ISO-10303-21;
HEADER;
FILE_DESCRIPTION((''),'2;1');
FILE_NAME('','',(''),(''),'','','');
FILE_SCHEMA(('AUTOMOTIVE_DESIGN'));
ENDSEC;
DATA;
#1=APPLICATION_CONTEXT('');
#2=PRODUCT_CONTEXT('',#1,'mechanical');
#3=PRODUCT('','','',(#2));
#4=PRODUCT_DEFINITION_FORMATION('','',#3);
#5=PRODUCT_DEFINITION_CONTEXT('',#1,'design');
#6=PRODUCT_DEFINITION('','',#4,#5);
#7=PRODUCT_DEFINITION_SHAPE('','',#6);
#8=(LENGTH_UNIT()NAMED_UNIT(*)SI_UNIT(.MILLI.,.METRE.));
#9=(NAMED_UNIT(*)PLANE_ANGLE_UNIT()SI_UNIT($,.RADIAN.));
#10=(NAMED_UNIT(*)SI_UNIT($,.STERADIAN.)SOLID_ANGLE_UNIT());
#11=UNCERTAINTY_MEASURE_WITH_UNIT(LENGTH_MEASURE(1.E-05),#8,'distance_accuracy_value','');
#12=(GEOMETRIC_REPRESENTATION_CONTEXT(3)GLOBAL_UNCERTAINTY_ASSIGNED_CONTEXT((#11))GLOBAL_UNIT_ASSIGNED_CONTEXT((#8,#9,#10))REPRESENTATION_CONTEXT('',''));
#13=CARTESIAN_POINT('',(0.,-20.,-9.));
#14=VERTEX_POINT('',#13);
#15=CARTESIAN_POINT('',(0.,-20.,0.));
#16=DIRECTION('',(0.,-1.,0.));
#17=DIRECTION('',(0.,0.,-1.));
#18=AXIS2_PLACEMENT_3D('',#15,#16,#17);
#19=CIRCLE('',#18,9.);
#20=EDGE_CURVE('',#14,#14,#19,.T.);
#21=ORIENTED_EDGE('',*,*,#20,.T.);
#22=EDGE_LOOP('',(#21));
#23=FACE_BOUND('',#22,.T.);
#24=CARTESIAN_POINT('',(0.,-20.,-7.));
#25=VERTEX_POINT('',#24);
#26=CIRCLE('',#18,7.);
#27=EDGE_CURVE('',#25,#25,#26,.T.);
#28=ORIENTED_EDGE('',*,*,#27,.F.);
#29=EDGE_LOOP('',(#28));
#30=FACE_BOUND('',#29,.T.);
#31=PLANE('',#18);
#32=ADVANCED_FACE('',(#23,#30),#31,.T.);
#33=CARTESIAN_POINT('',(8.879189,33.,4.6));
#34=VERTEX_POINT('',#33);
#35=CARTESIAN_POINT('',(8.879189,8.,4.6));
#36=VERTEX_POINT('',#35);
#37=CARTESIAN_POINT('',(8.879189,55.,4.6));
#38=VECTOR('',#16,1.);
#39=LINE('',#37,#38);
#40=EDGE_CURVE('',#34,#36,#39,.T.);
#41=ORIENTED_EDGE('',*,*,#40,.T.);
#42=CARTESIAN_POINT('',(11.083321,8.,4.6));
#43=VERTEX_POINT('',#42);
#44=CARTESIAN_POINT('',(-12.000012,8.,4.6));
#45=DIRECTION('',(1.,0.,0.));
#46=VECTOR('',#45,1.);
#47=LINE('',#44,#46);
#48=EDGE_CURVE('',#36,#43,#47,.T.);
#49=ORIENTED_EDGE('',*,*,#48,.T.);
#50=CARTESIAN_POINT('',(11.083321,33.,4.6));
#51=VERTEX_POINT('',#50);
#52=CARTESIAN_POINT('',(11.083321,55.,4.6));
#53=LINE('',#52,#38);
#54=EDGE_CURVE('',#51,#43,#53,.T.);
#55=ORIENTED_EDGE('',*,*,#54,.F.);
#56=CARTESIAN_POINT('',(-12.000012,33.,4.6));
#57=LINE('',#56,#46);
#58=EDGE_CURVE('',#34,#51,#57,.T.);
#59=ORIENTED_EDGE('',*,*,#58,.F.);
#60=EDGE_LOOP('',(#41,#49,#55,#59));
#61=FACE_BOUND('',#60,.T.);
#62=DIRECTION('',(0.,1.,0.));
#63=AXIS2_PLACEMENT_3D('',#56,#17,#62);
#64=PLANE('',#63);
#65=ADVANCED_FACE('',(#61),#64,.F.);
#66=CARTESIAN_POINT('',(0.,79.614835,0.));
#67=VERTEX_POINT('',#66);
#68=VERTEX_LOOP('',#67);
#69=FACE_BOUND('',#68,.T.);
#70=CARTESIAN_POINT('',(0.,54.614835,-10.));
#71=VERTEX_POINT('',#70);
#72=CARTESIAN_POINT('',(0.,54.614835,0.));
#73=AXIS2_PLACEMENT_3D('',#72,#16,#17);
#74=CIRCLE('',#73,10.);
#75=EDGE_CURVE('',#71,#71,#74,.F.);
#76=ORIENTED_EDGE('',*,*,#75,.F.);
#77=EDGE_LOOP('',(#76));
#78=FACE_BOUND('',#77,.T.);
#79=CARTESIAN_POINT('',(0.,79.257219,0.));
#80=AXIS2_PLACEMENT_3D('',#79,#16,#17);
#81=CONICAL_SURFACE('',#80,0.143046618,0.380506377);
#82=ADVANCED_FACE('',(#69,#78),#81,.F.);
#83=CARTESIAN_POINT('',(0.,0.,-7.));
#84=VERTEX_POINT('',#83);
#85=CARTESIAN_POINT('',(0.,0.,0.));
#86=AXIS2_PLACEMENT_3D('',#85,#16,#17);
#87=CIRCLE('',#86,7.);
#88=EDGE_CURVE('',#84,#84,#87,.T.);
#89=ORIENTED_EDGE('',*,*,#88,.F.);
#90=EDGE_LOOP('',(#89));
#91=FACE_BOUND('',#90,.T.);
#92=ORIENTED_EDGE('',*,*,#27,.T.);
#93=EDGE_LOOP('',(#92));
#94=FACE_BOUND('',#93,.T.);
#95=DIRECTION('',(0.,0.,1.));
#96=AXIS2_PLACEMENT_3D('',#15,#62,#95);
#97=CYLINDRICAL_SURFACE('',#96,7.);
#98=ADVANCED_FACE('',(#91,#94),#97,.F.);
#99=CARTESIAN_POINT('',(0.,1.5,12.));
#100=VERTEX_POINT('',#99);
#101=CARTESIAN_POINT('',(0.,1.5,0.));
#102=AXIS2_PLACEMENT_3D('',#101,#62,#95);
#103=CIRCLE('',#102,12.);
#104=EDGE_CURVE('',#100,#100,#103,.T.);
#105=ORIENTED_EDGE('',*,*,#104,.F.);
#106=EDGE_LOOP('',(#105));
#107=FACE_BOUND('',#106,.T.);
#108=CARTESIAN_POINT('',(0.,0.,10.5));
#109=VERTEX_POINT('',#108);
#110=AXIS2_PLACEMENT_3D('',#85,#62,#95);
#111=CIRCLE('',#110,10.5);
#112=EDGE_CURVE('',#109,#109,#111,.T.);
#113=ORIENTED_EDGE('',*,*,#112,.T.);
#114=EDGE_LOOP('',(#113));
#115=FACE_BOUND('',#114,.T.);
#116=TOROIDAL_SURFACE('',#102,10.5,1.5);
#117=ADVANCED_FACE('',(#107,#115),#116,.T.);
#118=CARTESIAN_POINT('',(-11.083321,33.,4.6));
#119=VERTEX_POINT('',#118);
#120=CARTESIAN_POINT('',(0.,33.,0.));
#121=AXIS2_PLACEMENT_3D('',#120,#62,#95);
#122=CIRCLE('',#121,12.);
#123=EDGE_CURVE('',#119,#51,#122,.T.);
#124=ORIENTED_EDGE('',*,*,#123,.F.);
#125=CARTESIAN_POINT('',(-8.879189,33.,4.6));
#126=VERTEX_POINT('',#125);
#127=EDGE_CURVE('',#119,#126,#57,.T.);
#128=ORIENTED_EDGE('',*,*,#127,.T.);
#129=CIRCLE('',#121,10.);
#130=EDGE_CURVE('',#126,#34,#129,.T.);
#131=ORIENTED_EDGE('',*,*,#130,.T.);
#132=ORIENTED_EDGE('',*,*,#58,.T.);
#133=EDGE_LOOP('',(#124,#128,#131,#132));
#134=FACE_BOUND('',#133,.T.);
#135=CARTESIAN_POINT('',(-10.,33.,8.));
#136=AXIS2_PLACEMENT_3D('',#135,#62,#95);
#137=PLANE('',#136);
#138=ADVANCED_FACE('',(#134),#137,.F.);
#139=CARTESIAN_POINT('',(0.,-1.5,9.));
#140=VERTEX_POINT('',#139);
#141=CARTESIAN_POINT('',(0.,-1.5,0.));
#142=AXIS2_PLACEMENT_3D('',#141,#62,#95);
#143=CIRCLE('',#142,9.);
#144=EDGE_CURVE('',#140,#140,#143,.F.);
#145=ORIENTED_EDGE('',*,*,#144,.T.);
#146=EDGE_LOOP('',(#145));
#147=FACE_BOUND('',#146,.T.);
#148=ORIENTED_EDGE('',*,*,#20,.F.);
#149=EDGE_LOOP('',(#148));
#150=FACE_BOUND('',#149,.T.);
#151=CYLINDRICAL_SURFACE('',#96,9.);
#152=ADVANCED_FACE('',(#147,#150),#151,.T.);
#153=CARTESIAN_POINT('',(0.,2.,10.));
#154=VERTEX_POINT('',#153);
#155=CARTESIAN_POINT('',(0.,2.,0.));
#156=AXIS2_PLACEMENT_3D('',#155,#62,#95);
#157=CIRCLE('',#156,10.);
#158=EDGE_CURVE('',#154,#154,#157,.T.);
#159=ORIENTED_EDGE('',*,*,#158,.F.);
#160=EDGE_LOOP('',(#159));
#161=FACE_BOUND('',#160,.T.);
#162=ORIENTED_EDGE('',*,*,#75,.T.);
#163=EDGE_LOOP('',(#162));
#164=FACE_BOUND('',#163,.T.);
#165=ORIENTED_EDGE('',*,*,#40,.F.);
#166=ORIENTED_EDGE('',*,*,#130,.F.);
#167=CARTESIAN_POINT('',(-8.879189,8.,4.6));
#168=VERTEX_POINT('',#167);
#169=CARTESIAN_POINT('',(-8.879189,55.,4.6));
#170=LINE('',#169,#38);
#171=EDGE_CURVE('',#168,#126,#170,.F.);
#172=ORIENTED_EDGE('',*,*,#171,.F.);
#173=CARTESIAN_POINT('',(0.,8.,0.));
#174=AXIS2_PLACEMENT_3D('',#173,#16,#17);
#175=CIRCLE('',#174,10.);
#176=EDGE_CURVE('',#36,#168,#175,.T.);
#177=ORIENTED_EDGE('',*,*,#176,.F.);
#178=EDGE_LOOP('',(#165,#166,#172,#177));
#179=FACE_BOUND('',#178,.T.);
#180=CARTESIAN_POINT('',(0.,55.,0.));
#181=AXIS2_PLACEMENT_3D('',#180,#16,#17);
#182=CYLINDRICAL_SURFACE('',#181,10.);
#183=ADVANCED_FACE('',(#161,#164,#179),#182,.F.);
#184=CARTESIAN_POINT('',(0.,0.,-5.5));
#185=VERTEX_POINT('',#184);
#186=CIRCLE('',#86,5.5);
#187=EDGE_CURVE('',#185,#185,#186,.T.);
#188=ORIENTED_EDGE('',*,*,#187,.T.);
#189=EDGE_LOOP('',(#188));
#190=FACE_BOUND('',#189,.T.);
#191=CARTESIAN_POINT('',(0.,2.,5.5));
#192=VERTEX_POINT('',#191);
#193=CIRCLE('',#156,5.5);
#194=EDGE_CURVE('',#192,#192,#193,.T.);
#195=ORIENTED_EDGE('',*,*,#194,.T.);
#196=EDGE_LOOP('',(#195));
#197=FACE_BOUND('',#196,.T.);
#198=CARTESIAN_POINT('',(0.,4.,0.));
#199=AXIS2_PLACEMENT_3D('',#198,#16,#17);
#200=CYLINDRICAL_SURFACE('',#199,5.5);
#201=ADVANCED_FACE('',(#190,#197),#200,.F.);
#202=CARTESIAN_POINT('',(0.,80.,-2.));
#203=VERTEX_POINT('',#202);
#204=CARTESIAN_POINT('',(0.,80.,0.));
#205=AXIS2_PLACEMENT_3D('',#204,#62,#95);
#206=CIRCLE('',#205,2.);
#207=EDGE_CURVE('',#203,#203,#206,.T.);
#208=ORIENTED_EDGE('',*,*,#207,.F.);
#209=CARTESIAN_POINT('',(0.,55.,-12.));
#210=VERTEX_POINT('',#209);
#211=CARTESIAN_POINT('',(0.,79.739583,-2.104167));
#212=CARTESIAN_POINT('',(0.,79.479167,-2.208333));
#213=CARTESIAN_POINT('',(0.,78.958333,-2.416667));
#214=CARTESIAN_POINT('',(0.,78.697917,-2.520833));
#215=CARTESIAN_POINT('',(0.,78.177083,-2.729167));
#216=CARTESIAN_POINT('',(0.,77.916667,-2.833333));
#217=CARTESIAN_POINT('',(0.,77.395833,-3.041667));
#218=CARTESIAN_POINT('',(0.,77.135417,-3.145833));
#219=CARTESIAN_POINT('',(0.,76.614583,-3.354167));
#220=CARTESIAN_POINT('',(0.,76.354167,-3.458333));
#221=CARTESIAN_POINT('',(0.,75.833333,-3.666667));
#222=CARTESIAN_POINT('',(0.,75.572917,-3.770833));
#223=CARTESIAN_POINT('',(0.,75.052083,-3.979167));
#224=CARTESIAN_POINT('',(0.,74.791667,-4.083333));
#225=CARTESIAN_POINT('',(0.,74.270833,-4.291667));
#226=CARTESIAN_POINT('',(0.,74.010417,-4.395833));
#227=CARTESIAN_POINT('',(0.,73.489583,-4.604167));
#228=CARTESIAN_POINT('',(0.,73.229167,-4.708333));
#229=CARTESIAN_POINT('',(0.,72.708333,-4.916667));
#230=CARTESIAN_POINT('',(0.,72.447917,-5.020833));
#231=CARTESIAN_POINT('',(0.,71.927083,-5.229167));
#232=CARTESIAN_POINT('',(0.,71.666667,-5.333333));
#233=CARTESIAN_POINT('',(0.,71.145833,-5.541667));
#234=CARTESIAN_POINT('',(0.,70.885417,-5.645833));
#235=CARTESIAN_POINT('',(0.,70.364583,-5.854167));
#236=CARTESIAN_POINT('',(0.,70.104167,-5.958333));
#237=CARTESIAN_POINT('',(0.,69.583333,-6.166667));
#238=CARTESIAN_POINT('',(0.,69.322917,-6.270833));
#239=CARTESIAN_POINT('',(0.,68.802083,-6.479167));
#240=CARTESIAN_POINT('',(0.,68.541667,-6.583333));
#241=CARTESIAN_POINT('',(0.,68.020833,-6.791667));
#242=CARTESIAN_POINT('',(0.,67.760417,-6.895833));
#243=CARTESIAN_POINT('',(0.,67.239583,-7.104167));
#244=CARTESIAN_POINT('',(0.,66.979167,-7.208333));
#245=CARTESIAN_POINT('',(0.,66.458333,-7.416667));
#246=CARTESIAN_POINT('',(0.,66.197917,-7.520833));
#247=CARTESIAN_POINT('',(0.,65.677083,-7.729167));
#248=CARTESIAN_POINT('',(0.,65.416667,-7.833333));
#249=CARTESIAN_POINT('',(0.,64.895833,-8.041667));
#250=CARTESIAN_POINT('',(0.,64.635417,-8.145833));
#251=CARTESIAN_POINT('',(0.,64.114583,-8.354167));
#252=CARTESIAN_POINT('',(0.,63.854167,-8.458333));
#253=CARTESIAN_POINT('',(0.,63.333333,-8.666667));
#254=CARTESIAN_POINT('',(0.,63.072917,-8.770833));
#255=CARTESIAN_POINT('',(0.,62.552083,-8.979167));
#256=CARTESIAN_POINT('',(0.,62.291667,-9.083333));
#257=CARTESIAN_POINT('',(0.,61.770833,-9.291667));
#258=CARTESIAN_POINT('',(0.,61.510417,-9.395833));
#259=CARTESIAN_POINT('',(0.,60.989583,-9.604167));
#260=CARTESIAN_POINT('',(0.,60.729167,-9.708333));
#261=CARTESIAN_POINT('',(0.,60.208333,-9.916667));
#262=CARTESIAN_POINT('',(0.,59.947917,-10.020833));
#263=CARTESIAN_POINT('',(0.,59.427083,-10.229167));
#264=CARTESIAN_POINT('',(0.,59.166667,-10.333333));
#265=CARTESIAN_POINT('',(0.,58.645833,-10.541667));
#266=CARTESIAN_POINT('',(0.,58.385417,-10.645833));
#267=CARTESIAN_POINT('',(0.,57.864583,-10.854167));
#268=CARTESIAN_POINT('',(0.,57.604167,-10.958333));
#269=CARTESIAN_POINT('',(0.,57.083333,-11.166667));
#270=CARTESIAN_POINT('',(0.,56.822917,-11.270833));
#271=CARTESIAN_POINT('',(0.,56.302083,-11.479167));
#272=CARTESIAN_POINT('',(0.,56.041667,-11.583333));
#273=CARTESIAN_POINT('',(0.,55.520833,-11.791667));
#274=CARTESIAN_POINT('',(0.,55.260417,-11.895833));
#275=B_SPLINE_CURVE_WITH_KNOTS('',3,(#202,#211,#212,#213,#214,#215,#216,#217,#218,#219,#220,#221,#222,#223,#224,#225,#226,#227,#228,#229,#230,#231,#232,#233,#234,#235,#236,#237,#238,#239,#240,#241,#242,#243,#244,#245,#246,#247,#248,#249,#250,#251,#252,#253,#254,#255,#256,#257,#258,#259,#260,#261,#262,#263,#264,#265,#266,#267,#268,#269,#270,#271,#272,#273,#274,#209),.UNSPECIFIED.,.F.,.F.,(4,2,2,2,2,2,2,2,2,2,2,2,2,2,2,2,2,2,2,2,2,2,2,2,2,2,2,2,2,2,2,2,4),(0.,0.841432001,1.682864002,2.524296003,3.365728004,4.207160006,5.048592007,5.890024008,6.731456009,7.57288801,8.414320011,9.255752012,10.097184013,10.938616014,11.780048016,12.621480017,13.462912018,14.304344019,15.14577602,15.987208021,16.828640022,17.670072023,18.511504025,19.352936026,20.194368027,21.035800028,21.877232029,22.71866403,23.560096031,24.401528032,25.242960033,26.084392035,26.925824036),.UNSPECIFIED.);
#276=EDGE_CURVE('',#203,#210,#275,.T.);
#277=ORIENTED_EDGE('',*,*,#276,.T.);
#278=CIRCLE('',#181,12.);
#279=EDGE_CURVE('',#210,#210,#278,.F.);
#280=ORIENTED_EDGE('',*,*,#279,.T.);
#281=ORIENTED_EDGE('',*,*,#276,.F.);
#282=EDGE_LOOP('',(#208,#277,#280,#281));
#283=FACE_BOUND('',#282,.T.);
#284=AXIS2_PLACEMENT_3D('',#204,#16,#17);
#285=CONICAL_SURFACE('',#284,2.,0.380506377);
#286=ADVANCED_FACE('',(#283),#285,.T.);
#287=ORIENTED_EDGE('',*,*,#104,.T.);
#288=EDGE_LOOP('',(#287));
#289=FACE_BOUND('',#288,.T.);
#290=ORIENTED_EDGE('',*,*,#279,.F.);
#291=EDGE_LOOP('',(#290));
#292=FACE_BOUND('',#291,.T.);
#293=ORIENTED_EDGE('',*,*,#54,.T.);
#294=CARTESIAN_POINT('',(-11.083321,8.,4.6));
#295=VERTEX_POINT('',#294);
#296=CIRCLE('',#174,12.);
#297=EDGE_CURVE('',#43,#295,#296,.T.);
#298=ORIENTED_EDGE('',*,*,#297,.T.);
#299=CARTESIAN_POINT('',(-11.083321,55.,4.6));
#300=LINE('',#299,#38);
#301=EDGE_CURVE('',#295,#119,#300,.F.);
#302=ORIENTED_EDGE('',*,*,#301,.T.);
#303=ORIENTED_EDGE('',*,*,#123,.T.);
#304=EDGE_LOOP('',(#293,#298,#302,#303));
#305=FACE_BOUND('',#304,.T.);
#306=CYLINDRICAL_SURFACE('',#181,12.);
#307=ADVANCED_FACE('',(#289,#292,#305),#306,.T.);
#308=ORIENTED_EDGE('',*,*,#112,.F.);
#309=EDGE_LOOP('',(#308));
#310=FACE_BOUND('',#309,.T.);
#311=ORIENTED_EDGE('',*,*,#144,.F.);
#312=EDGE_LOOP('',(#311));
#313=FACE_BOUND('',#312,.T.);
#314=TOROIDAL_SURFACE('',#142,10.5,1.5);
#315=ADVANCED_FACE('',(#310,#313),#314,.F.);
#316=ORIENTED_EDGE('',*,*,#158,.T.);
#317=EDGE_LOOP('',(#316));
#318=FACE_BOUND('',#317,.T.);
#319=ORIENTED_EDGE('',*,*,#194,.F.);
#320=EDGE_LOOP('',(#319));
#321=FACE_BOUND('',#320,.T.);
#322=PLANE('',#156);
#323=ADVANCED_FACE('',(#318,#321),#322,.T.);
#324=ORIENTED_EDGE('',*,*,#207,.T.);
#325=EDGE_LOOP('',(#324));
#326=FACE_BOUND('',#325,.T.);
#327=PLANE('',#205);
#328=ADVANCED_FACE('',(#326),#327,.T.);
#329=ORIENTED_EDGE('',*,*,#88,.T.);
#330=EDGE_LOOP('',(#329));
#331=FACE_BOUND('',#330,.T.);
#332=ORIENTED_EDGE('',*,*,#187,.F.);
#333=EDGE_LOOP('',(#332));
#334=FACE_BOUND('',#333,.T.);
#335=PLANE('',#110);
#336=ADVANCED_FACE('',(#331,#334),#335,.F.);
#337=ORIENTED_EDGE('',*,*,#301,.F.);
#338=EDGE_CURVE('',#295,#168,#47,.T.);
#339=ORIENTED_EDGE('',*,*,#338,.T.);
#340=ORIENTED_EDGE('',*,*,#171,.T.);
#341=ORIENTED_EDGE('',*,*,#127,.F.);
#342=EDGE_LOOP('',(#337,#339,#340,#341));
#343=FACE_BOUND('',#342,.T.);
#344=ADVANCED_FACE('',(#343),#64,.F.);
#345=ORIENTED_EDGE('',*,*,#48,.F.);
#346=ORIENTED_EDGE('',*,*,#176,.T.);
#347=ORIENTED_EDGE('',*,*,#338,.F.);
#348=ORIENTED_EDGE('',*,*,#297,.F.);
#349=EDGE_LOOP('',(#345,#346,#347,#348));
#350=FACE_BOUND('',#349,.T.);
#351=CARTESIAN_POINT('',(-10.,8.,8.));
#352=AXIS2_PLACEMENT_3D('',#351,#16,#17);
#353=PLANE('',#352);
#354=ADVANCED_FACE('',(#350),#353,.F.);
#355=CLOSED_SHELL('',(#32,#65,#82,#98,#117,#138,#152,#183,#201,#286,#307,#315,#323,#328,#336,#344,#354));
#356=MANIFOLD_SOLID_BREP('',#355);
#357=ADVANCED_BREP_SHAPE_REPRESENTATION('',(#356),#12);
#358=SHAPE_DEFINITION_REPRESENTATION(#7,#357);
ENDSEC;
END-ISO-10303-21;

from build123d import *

# Parameters (mm, degrees)
SKETCH1_R               = 12
BOSS_EXTRUDE1_DEPTH     = 55
SKETCH2_R               = 2
SKETCH3_R               = 9
SKETCH3_R_2             = 7
BOSS_EXTRUDE2_DEPTH     = 20
SKETCH5_R               = 5.5
CUT_EXTRUDE2_DEPTH      = 4
SKETCH6_W               = 20
SKETCH6_H               = 25
CUT_EXTRUDE3_DEPTH      = 3
CUT_EXTRUDE4_DEPTH      = 85.380092576
CUT_EXTRUDE4_DEPTH_BACK = 85.380092576
SKETCH7_W               = 7.4
SKETCH7_H               = 25
FILLET1_R               = 1.5


# Read off the part's stored shape, not the designer's step: Shell1
with BuildPart() as part:
    # Sketch1 → Boss-Extrude1 (new body)
    with BuildSketch(Plane(origin=(0, 0, 0), x_dir=(1, 0, 0), z_dir=(0, 1, 0))):
        with Locations(Location((0, 0, 0), (0, 0, 270))):
            Circle(SKETCH1_R)
    extrude(amount=BOSS_EXTRUDE1_DEPTH)

    # Sketch2 → section 0 of loft1
    with BuildSketch(Plane(origin=(0, 80, 0), x_dir=(1, 0, 0), z_dir=(0, 1, 0)), mode=Mode.PRIVATE) as loft1_s0:
        Circle(SKETCH2_R)
    # loft up to a face of the part (loft1)
    loft([loft1_s0.sketch, Face(Wire([part.edges().sort_by_distance((8.747623529, 55, -8.214565271))[0]]))])

    # Shell1 outline → Shell1 (revolve, cut)
    with BuildSketch(Plane.XY):
        Polygon((10, 2), (10, 54.614835193), (0, 79.614835193), (0, 2), align=None)
    revolve(axis=Axis((0, 0, 0), (0, 1, 0)), mode=Mode.SUBTRACT)

    # Sketch3 → Boss-Extrude2 (add)
    with BuildSketch(Plane.XZ):
        with Locations(Location((0, 0, 0), (0, 0, 90))):
            Circle(SKETCH3_R)
        with Locations(Location((0, 0, 0), (0, 0, 270))):
            Circle(SKETCH3_R_2, mode=Mode.SUBTRACT)
    extrude(amount=BOSS_EXTRUDE2_DEPTH)

    # Sketch5 → Cut-Extrude2 (cut)
    with BuildSketch(Plane.XZ):
        with Locations(Location((0, 0, 0), (0, 0, 270))):
            Circle(SKETCH5_R)
    extrude(amount=-CUT_EXTRUDE2_DEPTH, mode=Mode.SUBTRACT)

    # Sketch6 → Cut-Extrude3 (cut, symmetric)
    with BuildSketch(Plane.XY.offset(11)):
        with Locations((0, 20.5)):
            Rectangle(SKETCH6_W, SKETCH6_H)
    extrude(amount=CUT_EXTRUDE3_DEPTH, both=True, mode=Mode.SUBTRACT)

    # Sketch7 → Cut-Extrude4 (cut, two sides: drawn at the far end of the back side and taken through both)
    with BuildSketch(Plane(origin=(-12, 0, 0), x_dir=(0, 0, -1), z_dir=(1, 0, 0)).offset(-CUT_EXTRUDE4_DEPTH_BACK)):
        with Locations((-8.3, 20.5)):
            Rectangle(SKETCH7_W, SKETCH7_H)
    extrude(amount=CUT_EXTRUDE4_DEPTH + CUT_EXTRUDE4_DEPTH_BACK, mode=Mode.SUBTRACT)

    # Fillet1
    fillet1_edges = [part.edges().sort_by_distance(p)[0] for p in [
        (0, 0, -9),
        (0, 0, -12),
    ]]
    fillet(fillet1_edges, radius=FILLET1_R - 0.0001)  # a hair under: the kernel refuses the full size


solid = part.part
